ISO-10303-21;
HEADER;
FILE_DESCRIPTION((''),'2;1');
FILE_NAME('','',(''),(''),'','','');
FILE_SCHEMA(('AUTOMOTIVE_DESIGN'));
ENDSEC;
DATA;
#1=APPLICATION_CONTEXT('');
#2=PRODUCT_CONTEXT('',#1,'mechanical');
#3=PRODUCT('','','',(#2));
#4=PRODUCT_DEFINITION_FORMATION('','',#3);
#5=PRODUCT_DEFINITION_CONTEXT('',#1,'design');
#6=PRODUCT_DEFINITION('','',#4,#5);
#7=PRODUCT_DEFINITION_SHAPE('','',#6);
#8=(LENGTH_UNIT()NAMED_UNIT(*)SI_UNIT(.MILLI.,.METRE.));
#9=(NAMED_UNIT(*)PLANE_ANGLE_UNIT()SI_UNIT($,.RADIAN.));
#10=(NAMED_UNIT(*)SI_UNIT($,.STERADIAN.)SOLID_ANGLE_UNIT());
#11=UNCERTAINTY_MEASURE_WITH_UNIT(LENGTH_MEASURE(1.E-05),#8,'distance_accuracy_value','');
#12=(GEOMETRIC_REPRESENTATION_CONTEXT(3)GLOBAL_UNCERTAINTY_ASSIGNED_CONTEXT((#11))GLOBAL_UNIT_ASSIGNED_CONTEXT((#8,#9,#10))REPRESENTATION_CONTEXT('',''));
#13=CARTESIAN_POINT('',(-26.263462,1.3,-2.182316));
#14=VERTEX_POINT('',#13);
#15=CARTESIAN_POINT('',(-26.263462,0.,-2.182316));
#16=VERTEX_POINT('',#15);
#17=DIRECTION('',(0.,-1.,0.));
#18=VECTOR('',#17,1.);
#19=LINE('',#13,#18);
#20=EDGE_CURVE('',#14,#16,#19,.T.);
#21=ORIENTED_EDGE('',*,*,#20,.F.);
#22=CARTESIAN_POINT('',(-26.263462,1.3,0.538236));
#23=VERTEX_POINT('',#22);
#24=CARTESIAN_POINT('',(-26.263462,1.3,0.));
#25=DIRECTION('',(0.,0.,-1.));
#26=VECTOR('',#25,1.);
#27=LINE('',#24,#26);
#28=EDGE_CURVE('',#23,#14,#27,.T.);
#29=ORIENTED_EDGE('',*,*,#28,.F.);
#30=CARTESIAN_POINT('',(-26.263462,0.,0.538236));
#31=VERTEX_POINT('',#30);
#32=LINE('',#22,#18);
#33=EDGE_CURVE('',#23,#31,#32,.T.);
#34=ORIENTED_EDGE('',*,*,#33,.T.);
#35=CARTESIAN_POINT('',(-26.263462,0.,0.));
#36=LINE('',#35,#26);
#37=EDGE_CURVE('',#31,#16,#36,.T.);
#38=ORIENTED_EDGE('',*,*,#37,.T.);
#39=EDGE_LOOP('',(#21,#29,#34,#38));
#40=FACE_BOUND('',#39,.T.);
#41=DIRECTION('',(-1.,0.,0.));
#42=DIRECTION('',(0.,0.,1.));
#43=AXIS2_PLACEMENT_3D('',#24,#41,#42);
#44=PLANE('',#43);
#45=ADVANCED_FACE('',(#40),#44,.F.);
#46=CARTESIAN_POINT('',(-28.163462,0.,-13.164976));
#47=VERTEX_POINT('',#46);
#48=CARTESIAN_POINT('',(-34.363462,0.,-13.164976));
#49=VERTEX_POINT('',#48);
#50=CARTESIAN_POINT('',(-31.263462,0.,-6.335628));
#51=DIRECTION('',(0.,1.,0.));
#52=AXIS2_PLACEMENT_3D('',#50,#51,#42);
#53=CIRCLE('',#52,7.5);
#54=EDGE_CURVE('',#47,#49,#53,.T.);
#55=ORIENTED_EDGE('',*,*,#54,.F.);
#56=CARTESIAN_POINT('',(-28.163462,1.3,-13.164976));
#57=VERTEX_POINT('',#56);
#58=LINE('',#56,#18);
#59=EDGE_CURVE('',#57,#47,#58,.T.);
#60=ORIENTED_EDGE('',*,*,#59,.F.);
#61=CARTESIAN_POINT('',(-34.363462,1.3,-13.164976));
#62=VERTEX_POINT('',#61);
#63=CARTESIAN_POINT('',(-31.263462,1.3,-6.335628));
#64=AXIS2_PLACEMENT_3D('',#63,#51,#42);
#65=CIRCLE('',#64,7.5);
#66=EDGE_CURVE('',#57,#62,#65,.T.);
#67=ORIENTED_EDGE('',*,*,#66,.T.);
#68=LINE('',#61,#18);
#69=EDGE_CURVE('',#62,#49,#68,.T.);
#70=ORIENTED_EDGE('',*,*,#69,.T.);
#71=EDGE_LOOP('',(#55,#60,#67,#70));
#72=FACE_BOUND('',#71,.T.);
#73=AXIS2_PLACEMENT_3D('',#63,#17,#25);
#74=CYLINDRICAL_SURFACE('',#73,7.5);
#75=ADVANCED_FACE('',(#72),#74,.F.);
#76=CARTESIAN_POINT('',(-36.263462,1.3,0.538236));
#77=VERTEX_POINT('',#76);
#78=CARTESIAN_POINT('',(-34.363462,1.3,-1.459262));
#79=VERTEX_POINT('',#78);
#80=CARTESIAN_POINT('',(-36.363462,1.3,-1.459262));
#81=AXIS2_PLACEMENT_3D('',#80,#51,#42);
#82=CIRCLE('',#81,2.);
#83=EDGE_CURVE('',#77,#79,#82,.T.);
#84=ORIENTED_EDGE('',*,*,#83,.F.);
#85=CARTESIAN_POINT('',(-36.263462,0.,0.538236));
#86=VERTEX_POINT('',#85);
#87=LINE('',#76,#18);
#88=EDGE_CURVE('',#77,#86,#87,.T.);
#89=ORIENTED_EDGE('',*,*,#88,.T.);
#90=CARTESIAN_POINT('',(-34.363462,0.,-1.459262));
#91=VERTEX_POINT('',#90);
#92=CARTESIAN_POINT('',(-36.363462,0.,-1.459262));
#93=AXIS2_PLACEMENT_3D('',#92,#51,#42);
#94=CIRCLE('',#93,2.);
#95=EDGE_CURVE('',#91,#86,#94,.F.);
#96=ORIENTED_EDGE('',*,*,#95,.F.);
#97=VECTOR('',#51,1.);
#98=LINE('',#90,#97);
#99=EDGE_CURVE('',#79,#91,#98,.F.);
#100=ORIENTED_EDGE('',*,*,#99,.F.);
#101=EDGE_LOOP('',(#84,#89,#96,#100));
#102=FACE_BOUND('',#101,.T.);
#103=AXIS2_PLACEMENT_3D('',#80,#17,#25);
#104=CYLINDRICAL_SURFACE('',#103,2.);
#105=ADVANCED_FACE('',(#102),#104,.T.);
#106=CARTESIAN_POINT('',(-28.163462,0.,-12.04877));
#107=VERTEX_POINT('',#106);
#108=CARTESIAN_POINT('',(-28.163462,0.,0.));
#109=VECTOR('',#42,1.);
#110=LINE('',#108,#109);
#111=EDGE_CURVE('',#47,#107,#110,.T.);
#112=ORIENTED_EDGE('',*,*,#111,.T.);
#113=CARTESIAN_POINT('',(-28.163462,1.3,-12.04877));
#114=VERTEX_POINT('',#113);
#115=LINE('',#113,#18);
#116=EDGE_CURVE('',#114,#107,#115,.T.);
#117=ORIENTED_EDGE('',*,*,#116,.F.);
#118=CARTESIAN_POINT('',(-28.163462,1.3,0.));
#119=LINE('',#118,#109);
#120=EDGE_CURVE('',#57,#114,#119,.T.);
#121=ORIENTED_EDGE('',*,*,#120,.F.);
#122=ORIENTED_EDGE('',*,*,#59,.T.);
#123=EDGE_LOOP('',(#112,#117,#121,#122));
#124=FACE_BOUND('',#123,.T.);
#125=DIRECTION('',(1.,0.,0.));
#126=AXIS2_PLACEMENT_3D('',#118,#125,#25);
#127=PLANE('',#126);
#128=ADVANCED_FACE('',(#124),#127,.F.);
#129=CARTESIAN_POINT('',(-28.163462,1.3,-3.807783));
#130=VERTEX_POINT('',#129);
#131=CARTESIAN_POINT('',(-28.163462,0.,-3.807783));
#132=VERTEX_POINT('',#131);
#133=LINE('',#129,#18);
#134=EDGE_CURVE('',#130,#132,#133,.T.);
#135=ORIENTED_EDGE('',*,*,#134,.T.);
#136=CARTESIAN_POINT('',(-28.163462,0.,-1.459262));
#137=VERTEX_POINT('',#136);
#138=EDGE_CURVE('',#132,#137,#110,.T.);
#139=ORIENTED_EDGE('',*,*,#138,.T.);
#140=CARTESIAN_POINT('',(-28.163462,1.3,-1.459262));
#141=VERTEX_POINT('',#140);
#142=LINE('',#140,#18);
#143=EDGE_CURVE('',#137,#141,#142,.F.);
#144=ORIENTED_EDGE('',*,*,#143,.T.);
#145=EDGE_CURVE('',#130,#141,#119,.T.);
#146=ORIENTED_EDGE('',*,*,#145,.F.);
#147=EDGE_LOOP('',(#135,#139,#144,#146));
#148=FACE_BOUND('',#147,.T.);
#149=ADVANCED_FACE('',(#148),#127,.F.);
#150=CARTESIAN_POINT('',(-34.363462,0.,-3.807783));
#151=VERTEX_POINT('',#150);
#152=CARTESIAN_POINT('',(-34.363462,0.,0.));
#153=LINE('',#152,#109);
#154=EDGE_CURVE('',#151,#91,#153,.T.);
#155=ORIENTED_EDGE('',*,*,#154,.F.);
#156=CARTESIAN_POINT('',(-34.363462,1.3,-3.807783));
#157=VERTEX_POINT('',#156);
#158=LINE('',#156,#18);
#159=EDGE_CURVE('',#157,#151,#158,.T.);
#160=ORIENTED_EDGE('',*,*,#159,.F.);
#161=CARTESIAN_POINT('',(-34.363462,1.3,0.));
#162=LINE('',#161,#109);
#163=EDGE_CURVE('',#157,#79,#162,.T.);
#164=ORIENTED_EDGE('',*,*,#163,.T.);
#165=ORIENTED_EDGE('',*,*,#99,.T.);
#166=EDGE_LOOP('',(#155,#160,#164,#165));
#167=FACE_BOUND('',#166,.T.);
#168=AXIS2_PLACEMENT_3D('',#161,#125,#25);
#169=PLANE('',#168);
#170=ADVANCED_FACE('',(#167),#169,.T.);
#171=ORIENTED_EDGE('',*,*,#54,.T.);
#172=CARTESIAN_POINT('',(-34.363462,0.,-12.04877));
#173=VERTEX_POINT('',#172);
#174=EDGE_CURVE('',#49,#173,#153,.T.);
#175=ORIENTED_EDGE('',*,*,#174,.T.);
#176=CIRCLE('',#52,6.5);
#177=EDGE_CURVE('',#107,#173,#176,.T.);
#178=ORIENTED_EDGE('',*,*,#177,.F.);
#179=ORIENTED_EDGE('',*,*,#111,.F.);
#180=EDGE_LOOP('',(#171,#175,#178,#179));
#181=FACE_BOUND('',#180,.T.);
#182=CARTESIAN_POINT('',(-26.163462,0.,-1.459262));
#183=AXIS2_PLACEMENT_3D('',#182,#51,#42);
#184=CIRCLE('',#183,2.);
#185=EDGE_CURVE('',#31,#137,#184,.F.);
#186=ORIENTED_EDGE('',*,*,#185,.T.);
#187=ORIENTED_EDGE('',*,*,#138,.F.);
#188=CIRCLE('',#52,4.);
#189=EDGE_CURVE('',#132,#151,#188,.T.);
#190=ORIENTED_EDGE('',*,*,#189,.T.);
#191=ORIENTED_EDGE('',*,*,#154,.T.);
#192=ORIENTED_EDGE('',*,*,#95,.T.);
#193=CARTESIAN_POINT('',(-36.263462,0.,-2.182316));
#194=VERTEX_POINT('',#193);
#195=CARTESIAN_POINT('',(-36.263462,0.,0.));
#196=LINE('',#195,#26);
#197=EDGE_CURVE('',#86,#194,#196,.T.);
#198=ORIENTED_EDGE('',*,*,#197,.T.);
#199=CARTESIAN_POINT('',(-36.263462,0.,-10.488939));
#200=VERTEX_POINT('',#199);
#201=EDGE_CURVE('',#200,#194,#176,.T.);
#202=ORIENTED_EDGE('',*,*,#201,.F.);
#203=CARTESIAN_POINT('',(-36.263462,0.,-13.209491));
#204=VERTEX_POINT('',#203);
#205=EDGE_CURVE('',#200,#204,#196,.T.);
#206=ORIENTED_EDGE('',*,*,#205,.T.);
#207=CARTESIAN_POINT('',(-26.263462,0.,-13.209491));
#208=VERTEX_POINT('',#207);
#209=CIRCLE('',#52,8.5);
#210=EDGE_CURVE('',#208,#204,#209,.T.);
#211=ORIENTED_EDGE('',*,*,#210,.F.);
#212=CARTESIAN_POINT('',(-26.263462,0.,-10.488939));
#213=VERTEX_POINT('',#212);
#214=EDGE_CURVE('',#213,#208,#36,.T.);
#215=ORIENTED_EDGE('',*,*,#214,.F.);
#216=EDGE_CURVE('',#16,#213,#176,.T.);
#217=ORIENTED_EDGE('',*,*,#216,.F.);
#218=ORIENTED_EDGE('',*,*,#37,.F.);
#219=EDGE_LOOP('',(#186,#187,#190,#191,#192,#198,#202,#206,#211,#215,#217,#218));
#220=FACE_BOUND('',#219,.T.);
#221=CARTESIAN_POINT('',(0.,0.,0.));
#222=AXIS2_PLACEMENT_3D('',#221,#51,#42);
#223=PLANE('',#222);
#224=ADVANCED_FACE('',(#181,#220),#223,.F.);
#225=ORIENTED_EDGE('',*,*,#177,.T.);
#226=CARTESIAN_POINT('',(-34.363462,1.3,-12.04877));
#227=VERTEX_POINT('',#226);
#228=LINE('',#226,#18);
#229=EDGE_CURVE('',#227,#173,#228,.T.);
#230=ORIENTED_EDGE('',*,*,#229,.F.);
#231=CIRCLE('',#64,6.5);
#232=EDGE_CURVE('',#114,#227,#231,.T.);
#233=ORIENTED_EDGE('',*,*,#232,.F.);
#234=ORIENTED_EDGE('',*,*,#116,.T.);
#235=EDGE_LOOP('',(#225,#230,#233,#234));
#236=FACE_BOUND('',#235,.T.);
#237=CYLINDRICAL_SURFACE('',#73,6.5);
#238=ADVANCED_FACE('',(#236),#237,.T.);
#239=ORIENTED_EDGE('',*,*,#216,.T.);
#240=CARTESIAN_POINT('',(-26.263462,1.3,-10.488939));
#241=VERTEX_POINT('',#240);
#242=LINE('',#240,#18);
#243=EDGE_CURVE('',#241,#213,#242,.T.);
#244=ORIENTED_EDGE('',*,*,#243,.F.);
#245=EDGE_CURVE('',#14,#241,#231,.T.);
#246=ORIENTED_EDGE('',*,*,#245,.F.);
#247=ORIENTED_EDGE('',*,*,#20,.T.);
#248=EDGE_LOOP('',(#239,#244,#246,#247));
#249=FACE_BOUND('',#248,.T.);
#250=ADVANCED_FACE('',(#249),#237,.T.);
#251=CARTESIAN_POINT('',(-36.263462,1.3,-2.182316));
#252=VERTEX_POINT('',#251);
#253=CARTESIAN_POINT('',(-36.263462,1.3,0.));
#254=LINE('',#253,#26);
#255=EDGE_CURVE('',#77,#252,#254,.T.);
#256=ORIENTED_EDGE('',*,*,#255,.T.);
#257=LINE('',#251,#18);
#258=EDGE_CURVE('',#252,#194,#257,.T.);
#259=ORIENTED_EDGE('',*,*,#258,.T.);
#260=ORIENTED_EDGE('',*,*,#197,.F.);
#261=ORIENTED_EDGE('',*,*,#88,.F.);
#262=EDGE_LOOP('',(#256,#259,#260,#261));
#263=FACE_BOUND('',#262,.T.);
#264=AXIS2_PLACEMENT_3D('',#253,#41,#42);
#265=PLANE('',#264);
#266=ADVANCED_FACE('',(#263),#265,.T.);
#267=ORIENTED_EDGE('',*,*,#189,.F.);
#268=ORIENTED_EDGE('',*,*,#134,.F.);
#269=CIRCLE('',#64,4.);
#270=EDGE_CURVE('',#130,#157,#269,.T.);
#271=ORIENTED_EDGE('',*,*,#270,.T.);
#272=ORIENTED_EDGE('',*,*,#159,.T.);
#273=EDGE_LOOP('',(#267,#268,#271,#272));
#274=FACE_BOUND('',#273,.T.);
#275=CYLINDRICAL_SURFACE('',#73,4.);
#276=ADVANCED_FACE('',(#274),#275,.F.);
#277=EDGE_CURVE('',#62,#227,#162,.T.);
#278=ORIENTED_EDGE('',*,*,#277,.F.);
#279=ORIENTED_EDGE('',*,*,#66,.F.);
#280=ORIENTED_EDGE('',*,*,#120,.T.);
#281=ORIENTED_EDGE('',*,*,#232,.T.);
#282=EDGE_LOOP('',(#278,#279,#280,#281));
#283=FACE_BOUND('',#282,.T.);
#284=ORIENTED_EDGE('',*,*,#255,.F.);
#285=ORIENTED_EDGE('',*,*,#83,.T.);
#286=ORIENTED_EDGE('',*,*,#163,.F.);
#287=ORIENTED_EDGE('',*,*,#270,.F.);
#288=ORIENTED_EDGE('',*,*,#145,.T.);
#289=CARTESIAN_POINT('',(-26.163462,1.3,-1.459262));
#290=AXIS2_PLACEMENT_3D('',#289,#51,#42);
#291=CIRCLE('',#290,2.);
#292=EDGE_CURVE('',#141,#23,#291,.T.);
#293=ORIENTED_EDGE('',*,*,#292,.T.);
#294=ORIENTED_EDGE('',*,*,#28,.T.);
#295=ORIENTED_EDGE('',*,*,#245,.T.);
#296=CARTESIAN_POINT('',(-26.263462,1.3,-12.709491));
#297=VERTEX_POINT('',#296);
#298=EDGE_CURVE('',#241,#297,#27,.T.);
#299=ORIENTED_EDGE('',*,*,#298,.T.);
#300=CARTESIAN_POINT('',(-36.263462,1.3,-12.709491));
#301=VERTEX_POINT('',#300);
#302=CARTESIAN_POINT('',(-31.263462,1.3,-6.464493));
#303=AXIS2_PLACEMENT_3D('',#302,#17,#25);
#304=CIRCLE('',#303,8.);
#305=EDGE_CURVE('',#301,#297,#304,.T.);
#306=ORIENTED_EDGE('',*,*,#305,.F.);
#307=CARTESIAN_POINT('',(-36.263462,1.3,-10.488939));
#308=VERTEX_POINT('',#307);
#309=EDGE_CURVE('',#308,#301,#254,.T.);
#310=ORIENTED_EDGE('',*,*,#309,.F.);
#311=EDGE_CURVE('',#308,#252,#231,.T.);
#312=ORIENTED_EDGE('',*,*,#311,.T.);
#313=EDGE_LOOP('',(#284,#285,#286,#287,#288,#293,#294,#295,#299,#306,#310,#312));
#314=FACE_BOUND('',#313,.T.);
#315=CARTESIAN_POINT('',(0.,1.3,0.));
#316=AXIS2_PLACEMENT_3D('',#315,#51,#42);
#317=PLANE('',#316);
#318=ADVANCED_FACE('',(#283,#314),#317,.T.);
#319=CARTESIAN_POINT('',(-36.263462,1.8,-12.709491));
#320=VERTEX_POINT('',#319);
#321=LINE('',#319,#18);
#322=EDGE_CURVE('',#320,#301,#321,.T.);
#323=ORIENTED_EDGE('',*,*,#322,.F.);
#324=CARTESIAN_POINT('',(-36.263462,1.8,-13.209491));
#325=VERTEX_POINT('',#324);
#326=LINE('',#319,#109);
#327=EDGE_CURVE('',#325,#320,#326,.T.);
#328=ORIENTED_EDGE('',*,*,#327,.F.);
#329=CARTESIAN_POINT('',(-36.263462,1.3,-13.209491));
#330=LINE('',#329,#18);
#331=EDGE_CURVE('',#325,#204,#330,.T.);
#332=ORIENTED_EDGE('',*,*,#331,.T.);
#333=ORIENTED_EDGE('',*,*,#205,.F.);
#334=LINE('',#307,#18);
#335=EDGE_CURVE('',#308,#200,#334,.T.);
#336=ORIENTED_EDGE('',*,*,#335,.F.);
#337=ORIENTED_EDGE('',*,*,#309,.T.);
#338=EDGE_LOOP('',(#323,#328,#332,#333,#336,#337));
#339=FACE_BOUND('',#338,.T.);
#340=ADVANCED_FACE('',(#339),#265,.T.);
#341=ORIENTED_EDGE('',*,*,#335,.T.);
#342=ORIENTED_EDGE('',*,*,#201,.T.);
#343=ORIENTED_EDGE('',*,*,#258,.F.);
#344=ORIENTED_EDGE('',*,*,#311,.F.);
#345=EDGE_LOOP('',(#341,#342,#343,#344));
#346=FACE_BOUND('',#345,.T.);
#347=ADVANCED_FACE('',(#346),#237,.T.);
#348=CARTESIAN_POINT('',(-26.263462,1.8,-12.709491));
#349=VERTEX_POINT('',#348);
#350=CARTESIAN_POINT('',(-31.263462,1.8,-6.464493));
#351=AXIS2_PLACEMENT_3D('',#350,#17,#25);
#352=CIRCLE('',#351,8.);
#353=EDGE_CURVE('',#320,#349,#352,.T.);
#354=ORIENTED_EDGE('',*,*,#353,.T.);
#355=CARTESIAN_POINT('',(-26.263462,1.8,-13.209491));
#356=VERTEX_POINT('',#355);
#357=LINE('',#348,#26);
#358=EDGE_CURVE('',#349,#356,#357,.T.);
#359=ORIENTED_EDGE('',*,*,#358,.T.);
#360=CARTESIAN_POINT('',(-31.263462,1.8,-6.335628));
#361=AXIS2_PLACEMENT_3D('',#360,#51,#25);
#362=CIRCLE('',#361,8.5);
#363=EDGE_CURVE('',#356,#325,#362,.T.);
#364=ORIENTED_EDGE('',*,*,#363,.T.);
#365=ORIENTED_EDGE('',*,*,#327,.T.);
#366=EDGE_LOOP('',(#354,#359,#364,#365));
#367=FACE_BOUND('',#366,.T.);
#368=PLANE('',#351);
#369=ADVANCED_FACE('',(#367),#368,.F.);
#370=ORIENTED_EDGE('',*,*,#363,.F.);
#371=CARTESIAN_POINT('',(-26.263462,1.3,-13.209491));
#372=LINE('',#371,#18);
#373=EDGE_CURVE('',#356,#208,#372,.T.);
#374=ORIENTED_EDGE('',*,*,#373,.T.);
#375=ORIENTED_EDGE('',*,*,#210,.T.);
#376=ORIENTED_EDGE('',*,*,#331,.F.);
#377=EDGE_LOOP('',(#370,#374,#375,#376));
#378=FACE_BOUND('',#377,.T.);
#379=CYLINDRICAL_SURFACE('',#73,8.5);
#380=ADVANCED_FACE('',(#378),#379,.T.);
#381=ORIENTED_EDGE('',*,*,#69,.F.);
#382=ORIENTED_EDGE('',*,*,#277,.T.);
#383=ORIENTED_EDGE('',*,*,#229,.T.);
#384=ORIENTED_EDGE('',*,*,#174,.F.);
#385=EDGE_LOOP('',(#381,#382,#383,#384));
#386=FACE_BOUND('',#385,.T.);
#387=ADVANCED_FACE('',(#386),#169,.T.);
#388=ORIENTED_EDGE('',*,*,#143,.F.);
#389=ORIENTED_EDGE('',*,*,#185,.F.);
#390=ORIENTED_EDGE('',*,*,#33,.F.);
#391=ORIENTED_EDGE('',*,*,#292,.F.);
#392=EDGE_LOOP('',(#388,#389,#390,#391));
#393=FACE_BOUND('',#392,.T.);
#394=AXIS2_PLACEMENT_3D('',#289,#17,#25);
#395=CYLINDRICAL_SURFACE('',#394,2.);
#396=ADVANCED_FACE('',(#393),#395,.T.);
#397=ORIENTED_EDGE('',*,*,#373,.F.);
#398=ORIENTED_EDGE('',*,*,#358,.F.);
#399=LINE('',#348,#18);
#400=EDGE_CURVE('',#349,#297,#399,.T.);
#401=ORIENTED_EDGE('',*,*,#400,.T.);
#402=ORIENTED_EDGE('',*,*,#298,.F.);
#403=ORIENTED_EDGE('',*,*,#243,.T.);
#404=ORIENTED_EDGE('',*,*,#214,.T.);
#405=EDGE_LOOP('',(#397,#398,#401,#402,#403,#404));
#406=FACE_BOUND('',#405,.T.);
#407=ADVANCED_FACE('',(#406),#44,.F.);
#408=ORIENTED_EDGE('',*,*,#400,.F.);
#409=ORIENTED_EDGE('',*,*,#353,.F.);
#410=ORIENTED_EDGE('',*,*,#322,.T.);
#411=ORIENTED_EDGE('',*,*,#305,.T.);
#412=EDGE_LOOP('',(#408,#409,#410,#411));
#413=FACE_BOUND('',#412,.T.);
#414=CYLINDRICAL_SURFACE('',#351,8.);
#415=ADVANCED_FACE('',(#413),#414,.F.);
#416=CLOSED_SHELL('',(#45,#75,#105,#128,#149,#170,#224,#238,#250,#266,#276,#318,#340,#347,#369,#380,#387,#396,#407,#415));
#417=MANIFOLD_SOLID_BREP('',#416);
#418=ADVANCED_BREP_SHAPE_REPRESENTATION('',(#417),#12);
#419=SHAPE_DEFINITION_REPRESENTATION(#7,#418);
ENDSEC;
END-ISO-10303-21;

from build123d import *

# Parameters (mm, degrees)
BOSS_EXTRUDE1_DEPTH = 1.3
FILLET1_R           = 2
BOSS_EXTRUDE2_DEPTH = 0.5


with BuildPart() as part:
    # Sketch1 → Boss-Extrude1 (new body)
    with BuildSketch(Plane(origin=(0, 0, 0), x_dir=(1, 0, 0), z_dir=(0, 1, 0))):
        with BuildLine():
            ThreePointArc((-34.363462402, 3.807782606), (-31.263462402, 10.335627538), (-28.163462402, 3.807782606))
            Line((-28.163462402, 3.807782606), (-28.163462402, -1.578916037))
            ThreePointArc((-28.163462402, -1.578916037), (-27.18017283, -1.119353768), (-26.263462402, -0.538236004))
            Line((-26.263462402, -0.538236004), (-26.263462402, 2.182315607))
            ThreePointArc((-26.263462402, 2.182315607), (-24.763462402, 6.335627538), (-26.263462402, 10.488939469))
            Line((-26.263462402, 10.488939469), (-26.263462402, 13.20949108))
            ThreePointArc((-26.263462402, 13.20949108), (-31.263462402, 14.835627538), (-36.263462402, 13.20949108))
            Line((-36.263462402, 13.20949108), (-36.263462402, 10.488939469))
            ThreePointArc((-36.263462402, 10.488939469), (-37.763462402, 6.335627538), (-36.263462402, 2.182315607))
            Line((-36.263462402, 2.182315607), (-36.263462402, -0.538236004))
            ThreePointArc((-36.263462402, -0.538236004), (-35.346751974, -1.119353768), (-34.363462402, -1.578916037))
            Line((-34.363462402, -1.578916037), (-34.363462402, 3.807782606))
        make_face()
        with BuildLine():
            Line((-28.163462402, 13.16497597), (-28.163462402, 12.048770281))
            ThreePointArc((-28.163462402, 12.048770281), (-31.263462402, 12.835627538), (-34.363462402, 12.048770281))
            Line((-34.363462402, 12.048770281), (-34.363462402, 13.16497597))
            ThreePointArc((-34.363462402, 13.16497597), (-31.263462402, 13.835627538), (-28.163462402, 13.16497597))
        make_face(mode=Mode.SUBTRACT)
    extrude(amount=BOSS_EXTRUDE1_DEPTH)

    # Fillet1
    # the kernel refuses this fillet: 2 mm, written as the material it takes off along each edge
    with BuildSketch(Plane(origin=(-34.363462402, -7.59544617, 1.578916037), x_dir=(-0.877056624193214, 0, -0.4803870085241726), z_dir=(0, 1, 0))) as fillet1_piece_1:
        with BuildLine():
            CenterArc((3.213614714, -1.703880534), FILLET1_R, 121.576665182, 87.134016017)
            Line((1.459501466, -2.664654551), (1.424419201, -2.683870031))
            Line((1.424419201, -2.683870031), (-0.035082265, -0.01921548))
            Line((-0.035082265, -0.01921548), (-0.005097263, 0.039673895))
            ThreePointArc((-0.005097263, 0.039673895), (1.083168377, 0.109297404), (2.145391194, 0.034077611))
            Line((2.145391194, 0.034077611), (2.166336754, 0))
        make_face()
    extrude(amount=16.49089234, mode=Mode.SUBTRACT)
    with BuildSketch(Plane(origin=(-28.163462402, -7.59544617, 1.578916037), x_dir=(0, 0, -1), z_dir=(0, 1, 0))) as fillet1_piece_2:
        with BuildLine():
            CenterArc((3.038178468, -2), FILLET1_R, 90, 87.134016017)
            Line((1.040680033, -1.9), (1.000730064, -1.898))
            ThreePointArc((1.000730064, -1.898), (0.424480004, -1.002505053), (-0.037244911, -0.014588235))
            Line((-0.037244911, -0.014588235), (0, 0.04))
            Line((0, 0.04), (3.038178468, 0.04))
            Line((3.038178468, 0.04), (3.038178468, 0))
        make_face()
    extrude(amount=16.49089234, mode=Mode.SUBTRACT)

    # Sketch2 → Boss-Extrude2 (add)
    with BuildSketch(Plane(origin=(0, 1.3, 0), x_dir=(1, 0, 0), z_dir=(0, 1, 0))):
        with BuildLine():
            Line((-26.263462402, 12.70949108), (-26.263462402, 13.20949108))
            ThreePointArc((-26.263462402, 13.20949108), (-31.263462402, 14.835627538), (-36.263462402, 13.20949108))
            Line((-36.263462402, 13.20949108), (-36.263462402, 12.70949108))
            ThreePointArc((-36.263462402, 12.70949108), (-31.263462402, 14.464493082), (-26.263462402, 12.70949108))
        make_face()
    extrude(amount=BOSS_EXTRUDE2_DEPTH)


solid = part.part
